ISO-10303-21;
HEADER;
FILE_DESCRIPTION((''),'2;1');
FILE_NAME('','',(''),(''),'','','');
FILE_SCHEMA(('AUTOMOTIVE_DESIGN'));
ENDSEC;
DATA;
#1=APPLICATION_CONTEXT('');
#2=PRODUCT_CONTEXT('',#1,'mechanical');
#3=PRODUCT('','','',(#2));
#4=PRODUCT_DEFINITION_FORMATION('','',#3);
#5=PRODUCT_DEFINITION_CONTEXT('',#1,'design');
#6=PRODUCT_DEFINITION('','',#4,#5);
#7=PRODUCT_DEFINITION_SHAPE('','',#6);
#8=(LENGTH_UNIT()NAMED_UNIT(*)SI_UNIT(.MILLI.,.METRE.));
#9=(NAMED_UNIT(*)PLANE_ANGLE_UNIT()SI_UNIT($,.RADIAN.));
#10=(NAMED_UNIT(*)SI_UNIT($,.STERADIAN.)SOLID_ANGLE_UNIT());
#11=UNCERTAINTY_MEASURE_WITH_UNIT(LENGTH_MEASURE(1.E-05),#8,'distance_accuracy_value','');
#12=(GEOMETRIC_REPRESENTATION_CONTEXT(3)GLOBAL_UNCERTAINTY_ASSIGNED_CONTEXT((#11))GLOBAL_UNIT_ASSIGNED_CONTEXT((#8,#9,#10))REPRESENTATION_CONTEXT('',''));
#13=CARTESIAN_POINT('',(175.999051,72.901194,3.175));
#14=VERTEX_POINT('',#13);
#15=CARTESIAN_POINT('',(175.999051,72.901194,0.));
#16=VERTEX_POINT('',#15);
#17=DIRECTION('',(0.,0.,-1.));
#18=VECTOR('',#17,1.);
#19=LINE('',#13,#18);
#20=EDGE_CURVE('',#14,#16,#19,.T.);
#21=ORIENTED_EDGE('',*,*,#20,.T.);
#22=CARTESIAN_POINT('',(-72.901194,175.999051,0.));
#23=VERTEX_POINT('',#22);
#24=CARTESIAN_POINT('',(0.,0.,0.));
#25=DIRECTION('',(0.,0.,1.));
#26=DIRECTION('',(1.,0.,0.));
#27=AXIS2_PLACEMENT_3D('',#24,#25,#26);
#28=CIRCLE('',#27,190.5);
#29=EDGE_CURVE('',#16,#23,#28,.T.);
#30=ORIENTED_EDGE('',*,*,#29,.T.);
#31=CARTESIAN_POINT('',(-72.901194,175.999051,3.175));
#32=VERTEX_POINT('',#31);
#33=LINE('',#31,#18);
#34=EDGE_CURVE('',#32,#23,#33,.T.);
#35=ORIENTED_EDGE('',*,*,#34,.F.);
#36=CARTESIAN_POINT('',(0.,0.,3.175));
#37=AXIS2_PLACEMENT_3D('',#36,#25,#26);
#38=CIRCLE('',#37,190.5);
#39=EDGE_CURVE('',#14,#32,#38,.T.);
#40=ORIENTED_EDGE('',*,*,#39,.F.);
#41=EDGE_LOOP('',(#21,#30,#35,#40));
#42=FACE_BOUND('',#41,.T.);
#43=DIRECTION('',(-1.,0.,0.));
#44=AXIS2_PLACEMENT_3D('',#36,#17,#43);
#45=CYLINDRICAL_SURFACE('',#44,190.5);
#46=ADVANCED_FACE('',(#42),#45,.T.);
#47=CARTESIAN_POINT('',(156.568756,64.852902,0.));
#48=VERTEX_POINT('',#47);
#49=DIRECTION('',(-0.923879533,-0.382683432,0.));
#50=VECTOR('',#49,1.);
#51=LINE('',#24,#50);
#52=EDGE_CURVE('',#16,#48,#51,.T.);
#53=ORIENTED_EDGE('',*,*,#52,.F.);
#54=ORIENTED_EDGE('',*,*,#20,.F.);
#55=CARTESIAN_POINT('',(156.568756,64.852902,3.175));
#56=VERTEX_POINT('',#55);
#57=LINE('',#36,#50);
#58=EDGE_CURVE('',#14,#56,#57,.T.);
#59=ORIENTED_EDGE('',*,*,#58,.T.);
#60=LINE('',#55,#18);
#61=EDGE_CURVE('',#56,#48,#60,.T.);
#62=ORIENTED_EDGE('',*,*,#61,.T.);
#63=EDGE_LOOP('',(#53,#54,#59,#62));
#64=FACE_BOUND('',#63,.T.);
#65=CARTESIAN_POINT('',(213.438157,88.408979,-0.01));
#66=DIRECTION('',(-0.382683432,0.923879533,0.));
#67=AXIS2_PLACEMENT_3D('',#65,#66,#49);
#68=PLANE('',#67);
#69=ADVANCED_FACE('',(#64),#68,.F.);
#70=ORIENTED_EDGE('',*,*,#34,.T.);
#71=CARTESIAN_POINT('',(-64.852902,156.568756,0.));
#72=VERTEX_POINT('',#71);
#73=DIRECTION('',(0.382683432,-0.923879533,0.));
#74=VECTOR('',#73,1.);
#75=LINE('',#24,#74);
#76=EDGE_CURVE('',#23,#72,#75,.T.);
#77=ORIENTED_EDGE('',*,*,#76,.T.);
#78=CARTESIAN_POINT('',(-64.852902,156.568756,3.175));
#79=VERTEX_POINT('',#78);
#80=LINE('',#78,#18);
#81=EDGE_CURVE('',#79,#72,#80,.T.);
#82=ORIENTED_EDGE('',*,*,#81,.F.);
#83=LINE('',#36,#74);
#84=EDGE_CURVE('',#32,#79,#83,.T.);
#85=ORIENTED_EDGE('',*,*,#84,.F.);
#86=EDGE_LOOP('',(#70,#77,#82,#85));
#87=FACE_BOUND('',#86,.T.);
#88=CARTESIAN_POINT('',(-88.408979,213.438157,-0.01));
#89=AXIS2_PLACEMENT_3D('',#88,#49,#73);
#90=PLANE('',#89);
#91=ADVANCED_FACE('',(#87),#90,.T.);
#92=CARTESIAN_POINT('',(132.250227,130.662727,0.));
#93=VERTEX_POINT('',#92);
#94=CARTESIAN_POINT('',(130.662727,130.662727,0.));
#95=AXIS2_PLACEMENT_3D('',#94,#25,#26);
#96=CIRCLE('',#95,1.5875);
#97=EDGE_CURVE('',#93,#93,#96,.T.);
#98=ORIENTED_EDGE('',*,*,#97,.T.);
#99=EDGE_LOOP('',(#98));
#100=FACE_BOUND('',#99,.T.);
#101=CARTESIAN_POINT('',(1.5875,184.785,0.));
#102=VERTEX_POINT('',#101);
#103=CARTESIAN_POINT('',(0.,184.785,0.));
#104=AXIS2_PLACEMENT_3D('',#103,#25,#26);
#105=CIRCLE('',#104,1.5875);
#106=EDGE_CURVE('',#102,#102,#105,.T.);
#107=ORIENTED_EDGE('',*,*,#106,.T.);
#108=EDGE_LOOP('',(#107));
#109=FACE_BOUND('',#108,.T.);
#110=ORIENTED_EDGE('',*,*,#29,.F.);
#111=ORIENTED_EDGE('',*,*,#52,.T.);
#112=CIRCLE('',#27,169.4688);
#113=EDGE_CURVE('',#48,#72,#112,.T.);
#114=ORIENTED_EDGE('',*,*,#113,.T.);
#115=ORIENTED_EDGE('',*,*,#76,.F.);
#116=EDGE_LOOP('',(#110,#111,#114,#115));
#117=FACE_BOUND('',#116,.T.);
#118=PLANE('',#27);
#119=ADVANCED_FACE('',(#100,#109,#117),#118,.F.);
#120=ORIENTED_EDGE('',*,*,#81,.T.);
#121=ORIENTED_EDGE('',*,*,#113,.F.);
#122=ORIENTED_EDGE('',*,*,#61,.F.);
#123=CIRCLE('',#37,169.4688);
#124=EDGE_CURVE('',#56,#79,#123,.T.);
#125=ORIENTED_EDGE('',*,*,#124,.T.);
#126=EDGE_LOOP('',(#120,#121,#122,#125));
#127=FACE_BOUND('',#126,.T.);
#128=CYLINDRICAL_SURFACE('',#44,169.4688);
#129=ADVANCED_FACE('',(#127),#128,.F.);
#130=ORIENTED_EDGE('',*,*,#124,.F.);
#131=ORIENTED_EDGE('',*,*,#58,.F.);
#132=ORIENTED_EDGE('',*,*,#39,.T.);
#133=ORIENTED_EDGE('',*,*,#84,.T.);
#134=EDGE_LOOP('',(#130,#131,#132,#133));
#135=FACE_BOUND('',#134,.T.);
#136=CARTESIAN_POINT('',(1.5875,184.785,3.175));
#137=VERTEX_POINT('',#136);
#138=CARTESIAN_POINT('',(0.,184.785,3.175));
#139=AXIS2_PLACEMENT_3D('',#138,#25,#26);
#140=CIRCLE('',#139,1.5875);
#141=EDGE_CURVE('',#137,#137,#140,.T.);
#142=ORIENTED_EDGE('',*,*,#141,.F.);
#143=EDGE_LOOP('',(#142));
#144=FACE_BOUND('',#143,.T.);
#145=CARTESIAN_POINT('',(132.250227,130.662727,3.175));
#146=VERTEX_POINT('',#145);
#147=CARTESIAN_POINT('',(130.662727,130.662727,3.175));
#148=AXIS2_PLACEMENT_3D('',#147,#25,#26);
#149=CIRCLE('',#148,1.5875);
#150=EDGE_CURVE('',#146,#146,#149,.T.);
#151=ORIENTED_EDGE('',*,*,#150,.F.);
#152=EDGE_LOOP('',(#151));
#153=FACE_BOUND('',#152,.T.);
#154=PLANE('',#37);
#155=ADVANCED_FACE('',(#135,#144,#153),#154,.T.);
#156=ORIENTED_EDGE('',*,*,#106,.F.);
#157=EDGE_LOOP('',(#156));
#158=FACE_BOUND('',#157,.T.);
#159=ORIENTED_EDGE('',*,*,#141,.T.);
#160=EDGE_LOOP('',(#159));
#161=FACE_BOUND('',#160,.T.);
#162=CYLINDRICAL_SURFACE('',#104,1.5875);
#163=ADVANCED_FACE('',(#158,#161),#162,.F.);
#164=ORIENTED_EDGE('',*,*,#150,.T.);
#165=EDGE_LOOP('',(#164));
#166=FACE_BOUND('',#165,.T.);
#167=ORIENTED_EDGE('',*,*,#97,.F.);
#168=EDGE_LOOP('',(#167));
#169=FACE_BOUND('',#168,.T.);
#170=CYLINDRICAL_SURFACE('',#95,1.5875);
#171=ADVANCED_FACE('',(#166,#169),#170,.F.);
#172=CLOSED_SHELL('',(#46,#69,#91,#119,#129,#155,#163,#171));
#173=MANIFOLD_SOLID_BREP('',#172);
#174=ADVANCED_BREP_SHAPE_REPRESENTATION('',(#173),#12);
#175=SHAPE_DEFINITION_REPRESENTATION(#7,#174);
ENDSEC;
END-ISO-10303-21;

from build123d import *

# Parameters (mm, degrees)
SKETCH2_R           = 190.5
SKETCH2_R_2         = 169.4688
BOSS_EXTRUDE2_DEPTH = 3.175
SKETCH6_R           = 1.5875
CUT_EXTRUDE1_DEPTH  = 270.426391849
SPLIT3_OUTLINE_R    = 1.5875
SPLIT3_DEPTH        = 3.175


# Read off the part's stored shape, not the designer's step: Split3
with BuildPart() as part:
    # Sketch2 → Boss-Extrude2 (new body)
    with BuildSketch(Plane.XY):
        Circle(SKETCH2_R)
        Circle(SKETCH2_R_2, mode=Mode.SUBTRACT)
    extrude(amount=BOSS_EXTRUDE2_DEPTH)

    # Sketch6 → Cut-Extrude1 (cut, through all)
    with BuildSketch(Plane.XY.offset(3.175)):
        with Locations((0, 184.785)):
            Circle(SKETCH6_R)
        with Locations((130.662726562, 130.662726562)):
            Circle(SKETCH6_R)
        with Locations((184.785, 0)):
            Circle(SKETCH6_R)
        with Locations((130.662726562, -130.662726562)):
            Circle(SKETCH6_R)
        with Locations((0, -184.785)):
            Circle(SKETCH6_R)
        with Locations((-130.662726562, -130.662726562)):
            Circle(SKETCH6_R)
        with Locations((-184.785, 0)):
            Circle(SKETCH6_R)
        with Locations((-130.662726562, 130.662726562)):
            Circle(SKETCH6_R)
    extrude(amount=-CUT_EXTRUDE1_DEPTH, mode=Mode.SUBTRACT)

    # Split3 outline → Split3 (cut)
    with BuildSketch(Plane.XY):
        with BuildLine():
            ThreePointArc((-72.901193866, 175.999050943), (-72.901193865, -175.999050944), (175.999050943, 72.901193866))
            Line((175.999050943, 72.901193866), (156.568755719, 64.852902063))
            ThreePointArc((156.568755719, 64.852902063), (-64.852902063, -156.568755719), (-64.852902063, 156.568755719))
            Line((-64.852902063, 156.568755719), (-72.901193866, 175.999050943))
        make_face()
        with Locations((-130.662726562, -130.662726562)):
            Circle(SPLIT3_OUTLINE_R, mode=Mode.SUBTRACT)
        with Locations((0, -184.785)):
            Circle(SPLIT3_OUTLINE_R, mode=Mode.SUBTRACT)
        with Locations((130.662726562, -130.662726562)):
            Circle(SPLIT3_OUTLINE_R, mode=Mode.SUBTRACT)
        with Locations((-184.785, 0)):
            Circle(SPLIT3_OUTLINE_R, mode=Mode.SUBTRACT)
        with Locations((-130.662726562, 130.662726562)):
            Circle(SPLIT3_OUTLINE_R, mode=Mode.SUBTRACT)
        with Locations((184.785, 0)):
            Circle(SPLIT3_OUTLINE_R, mode=Mode.SUBTRACT)
    extrude(amount=SPLIT3_DEPTH, mode=Mode.SUBTRACT)


solid = part.part
